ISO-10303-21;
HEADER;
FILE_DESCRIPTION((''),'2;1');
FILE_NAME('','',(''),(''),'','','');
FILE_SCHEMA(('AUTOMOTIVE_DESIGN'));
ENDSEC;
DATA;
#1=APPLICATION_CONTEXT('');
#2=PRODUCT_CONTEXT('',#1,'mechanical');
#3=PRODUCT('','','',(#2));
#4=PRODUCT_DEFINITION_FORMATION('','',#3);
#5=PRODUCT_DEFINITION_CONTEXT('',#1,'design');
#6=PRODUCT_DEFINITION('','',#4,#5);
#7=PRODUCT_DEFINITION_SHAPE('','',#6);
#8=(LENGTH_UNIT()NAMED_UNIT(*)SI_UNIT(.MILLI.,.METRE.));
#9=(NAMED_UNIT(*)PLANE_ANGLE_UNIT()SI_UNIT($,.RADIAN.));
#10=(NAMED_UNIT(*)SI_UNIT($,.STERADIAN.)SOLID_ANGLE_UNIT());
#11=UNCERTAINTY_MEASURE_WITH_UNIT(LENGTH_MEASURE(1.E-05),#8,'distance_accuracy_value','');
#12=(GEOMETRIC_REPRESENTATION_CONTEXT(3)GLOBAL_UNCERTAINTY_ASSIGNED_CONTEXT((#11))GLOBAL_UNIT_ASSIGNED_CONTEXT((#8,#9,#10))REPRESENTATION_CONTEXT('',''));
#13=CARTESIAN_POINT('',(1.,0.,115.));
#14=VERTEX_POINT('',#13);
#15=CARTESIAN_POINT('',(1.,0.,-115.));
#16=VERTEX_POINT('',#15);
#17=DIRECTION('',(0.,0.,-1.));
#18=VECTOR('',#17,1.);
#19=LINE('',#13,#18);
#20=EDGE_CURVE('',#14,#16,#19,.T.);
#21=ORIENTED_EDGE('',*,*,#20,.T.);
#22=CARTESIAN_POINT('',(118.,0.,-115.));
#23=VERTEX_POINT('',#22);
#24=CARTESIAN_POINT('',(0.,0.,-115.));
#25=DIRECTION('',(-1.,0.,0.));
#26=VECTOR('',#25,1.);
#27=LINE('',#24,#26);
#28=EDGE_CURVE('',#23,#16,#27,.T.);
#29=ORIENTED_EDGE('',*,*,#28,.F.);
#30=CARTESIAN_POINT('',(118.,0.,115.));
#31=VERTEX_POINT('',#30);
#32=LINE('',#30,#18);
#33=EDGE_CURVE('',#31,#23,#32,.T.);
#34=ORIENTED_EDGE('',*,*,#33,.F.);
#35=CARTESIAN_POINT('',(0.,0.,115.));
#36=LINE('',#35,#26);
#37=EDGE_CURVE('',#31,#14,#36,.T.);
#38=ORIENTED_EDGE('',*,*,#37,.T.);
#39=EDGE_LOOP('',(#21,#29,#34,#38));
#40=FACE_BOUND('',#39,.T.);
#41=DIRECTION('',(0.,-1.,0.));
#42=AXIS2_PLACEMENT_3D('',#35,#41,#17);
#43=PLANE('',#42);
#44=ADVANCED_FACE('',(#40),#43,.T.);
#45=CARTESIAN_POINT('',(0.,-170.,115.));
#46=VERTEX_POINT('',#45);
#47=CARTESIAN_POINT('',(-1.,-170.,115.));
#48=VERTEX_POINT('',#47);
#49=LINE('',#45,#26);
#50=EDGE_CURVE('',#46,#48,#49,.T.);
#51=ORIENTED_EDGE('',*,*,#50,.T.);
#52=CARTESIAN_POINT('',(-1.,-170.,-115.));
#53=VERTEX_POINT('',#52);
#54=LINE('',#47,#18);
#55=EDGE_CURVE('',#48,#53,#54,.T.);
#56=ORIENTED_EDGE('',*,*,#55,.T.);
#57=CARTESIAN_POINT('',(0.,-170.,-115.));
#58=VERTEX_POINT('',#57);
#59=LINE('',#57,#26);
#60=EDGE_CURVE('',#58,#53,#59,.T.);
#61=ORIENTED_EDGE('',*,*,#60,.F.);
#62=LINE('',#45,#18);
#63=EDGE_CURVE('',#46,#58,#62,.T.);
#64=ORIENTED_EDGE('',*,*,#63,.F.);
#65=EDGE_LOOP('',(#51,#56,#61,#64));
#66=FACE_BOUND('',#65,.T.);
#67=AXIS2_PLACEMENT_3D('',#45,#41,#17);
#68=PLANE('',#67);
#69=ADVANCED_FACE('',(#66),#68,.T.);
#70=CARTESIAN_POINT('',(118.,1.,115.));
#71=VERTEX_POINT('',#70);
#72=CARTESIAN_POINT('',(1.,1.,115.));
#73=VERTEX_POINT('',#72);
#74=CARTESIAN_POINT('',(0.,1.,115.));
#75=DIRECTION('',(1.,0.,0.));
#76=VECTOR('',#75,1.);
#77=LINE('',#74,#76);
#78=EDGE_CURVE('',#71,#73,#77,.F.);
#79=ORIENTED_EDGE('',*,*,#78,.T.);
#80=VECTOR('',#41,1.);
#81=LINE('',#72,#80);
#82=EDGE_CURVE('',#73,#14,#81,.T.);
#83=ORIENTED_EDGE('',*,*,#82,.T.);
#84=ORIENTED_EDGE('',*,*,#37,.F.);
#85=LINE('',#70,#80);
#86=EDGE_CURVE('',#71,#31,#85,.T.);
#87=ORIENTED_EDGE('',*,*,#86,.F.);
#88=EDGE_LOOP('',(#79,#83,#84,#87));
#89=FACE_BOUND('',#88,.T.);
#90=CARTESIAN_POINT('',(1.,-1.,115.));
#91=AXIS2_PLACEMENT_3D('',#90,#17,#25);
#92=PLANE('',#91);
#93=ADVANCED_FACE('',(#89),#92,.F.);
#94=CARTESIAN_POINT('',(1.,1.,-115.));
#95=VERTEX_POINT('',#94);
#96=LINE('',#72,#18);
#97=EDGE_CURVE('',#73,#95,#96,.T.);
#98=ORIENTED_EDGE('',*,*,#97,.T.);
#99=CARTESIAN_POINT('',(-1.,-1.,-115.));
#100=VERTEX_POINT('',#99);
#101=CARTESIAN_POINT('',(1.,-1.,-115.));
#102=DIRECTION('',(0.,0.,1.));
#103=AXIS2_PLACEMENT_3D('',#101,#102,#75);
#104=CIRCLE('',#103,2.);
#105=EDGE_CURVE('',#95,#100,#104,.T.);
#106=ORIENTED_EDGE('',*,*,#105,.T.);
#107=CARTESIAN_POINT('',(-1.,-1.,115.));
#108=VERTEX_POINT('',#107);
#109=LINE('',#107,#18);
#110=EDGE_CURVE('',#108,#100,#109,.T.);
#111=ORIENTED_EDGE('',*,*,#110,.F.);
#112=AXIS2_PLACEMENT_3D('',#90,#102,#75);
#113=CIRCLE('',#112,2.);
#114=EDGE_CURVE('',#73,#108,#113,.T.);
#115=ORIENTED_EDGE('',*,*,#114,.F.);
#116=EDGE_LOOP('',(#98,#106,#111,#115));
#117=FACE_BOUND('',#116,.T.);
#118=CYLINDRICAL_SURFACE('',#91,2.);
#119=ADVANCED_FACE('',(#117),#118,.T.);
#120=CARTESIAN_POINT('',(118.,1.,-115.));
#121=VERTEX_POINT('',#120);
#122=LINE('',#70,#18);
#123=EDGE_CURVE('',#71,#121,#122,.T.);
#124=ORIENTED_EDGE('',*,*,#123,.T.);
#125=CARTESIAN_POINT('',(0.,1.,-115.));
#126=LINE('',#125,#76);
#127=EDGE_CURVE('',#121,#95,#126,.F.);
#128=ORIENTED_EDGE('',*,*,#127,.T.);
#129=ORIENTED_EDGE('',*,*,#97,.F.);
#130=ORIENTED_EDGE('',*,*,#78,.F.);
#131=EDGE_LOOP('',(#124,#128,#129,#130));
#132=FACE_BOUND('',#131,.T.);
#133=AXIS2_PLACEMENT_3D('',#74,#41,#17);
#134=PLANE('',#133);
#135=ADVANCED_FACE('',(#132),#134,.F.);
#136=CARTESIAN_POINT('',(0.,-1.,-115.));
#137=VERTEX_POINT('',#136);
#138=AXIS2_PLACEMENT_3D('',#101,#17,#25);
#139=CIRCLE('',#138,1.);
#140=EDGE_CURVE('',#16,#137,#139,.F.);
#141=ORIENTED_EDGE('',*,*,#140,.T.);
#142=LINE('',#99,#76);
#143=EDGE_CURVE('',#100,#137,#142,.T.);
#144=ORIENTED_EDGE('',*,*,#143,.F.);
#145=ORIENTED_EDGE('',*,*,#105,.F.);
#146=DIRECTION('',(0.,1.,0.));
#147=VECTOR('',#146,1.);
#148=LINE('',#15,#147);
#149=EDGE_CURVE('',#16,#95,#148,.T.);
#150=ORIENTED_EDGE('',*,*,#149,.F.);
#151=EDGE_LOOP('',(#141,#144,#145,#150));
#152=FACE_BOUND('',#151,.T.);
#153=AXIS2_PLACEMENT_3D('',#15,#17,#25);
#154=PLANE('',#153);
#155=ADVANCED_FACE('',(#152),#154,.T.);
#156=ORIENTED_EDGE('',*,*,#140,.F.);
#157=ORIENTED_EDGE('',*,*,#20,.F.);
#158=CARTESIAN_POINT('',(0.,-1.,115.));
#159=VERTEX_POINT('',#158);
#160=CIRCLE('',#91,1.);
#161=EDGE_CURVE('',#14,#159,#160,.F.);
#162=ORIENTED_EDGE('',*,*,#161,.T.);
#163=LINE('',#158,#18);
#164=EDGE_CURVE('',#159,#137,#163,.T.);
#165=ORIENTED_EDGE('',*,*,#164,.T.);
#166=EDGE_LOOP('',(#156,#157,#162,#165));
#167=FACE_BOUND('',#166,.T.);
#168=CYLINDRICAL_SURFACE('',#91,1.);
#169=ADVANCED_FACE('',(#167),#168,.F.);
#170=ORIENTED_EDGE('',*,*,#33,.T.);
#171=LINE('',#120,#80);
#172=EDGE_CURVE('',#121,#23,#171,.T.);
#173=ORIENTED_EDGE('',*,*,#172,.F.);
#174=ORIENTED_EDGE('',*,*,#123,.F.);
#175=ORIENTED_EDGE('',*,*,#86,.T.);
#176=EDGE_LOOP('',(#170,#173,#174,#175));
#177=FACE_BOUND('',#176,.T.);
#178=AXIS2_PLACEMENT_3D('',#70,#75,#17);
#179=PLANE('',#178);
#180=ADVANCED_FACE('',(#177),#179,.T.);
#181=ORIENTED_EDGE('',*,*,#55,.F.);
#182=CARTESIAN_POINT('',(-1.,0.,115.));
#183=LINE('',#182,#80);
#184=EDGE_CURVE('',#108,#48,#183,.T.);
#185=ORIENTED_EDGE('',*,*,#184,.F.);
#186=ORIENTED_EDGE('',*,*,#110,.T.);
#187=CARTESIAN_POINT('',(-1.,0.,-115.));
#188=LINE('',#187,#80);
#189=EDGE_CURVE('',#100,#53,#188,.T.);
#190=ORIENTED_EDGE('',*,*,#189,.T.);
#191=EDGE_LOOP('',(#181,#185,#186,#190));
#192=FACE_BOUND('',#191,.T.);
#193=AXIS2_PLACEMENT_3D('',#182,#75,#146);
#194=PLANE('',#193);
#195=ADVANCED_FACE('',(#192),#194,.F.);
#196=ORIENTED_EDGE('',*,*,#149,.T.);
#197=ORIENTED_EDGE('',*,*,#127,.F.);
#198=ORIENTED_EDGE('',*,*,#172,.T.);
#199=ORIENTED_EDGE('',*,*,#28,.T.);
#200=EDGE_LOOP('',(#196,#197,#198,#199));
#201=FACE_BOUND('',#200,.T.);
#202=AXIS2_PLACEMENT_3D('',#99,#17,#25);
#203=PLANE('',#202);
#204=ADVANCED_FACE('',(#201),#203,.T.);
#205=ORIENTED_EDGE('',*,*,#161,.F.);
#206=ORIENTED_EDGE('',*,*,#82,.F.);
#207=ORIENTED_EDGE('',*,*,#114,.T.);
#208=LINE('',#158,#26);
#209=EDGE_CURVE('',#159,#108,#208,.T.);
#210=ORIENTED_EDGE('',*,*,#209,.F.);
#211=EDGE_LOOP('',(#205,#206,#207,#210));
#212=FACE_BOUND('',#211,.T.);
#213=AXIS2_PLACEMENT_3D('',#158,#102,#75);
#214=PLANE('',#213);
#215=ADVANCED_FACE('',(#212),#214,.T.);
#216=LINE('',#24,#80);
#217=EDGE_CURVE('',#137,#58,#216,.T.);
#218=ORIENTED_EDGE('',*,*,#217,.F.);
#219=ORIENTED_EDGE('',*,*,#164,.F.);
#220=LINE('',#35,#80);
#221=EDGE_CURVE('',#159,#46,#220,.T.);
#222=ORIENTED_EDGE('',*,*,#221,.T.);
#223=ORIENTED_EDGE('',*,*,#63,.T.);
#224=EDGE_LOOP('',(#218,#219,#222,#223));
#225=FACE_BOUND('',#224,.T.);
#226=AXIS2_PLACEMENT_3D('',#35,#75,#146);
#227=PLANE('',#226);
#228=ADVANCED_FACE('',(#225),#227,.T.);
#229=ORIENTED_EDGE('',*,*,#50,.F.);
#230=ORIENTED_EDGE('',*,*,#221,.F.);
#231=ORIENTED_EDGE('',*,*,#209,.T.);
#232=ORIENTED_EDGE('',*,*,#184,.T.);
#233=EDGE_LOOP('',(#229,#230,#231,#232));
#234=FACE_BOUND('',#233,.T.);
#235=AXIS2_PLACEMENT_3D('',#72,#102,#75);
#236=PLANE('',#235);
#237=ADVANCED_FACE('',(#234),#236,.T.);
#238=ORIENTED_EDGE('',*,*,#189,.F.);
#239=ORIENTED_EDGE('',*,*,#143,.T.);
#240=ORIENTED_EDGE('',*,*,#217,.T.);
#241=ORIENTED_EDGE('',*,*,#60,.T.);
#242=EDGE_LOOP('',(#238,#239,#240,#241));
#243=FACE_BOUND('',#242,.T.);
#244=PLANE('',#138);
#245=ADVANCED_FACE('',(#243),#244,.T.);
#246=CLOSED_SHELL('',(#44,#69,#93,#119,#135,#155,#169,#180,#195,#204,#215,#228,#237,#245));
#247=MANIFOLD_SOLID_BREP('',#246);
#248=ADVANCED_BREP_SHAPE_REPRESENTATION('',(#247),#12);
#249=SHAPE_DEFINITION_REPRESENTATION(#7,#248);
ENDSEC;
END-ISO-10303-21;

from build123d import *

# Parameters (mm, degrees)
BRIDA_BASE1_DEPTH = 115


# Sheet-metal steps are written as plain solids
with BuildPart() as part:
    # Croquis1 → Brida base1 (new, symmetric)
    with BuildSketch(Plane.XY):
        with BuildLine():
            Line((0, -170), (0, -1))
            ThreePointArc((0, -1), (0.292893219, -0.292893219), (1, 0))
            Line((1, 0), (118, 0))
            Line((118, 0), (118, 1))
            Line((118, 1), (1, 1))
            ThreePointArc((1, 1), (-0.414213562, 0.414213562), (-1, -1))
            Line((-1, -1), (-1, -170))
            Line((-1, -170), (0, -170))
        make_face()
    extrude(amount=BRIDA_BASE1_DEPTH, both=True)


solid = part.part
